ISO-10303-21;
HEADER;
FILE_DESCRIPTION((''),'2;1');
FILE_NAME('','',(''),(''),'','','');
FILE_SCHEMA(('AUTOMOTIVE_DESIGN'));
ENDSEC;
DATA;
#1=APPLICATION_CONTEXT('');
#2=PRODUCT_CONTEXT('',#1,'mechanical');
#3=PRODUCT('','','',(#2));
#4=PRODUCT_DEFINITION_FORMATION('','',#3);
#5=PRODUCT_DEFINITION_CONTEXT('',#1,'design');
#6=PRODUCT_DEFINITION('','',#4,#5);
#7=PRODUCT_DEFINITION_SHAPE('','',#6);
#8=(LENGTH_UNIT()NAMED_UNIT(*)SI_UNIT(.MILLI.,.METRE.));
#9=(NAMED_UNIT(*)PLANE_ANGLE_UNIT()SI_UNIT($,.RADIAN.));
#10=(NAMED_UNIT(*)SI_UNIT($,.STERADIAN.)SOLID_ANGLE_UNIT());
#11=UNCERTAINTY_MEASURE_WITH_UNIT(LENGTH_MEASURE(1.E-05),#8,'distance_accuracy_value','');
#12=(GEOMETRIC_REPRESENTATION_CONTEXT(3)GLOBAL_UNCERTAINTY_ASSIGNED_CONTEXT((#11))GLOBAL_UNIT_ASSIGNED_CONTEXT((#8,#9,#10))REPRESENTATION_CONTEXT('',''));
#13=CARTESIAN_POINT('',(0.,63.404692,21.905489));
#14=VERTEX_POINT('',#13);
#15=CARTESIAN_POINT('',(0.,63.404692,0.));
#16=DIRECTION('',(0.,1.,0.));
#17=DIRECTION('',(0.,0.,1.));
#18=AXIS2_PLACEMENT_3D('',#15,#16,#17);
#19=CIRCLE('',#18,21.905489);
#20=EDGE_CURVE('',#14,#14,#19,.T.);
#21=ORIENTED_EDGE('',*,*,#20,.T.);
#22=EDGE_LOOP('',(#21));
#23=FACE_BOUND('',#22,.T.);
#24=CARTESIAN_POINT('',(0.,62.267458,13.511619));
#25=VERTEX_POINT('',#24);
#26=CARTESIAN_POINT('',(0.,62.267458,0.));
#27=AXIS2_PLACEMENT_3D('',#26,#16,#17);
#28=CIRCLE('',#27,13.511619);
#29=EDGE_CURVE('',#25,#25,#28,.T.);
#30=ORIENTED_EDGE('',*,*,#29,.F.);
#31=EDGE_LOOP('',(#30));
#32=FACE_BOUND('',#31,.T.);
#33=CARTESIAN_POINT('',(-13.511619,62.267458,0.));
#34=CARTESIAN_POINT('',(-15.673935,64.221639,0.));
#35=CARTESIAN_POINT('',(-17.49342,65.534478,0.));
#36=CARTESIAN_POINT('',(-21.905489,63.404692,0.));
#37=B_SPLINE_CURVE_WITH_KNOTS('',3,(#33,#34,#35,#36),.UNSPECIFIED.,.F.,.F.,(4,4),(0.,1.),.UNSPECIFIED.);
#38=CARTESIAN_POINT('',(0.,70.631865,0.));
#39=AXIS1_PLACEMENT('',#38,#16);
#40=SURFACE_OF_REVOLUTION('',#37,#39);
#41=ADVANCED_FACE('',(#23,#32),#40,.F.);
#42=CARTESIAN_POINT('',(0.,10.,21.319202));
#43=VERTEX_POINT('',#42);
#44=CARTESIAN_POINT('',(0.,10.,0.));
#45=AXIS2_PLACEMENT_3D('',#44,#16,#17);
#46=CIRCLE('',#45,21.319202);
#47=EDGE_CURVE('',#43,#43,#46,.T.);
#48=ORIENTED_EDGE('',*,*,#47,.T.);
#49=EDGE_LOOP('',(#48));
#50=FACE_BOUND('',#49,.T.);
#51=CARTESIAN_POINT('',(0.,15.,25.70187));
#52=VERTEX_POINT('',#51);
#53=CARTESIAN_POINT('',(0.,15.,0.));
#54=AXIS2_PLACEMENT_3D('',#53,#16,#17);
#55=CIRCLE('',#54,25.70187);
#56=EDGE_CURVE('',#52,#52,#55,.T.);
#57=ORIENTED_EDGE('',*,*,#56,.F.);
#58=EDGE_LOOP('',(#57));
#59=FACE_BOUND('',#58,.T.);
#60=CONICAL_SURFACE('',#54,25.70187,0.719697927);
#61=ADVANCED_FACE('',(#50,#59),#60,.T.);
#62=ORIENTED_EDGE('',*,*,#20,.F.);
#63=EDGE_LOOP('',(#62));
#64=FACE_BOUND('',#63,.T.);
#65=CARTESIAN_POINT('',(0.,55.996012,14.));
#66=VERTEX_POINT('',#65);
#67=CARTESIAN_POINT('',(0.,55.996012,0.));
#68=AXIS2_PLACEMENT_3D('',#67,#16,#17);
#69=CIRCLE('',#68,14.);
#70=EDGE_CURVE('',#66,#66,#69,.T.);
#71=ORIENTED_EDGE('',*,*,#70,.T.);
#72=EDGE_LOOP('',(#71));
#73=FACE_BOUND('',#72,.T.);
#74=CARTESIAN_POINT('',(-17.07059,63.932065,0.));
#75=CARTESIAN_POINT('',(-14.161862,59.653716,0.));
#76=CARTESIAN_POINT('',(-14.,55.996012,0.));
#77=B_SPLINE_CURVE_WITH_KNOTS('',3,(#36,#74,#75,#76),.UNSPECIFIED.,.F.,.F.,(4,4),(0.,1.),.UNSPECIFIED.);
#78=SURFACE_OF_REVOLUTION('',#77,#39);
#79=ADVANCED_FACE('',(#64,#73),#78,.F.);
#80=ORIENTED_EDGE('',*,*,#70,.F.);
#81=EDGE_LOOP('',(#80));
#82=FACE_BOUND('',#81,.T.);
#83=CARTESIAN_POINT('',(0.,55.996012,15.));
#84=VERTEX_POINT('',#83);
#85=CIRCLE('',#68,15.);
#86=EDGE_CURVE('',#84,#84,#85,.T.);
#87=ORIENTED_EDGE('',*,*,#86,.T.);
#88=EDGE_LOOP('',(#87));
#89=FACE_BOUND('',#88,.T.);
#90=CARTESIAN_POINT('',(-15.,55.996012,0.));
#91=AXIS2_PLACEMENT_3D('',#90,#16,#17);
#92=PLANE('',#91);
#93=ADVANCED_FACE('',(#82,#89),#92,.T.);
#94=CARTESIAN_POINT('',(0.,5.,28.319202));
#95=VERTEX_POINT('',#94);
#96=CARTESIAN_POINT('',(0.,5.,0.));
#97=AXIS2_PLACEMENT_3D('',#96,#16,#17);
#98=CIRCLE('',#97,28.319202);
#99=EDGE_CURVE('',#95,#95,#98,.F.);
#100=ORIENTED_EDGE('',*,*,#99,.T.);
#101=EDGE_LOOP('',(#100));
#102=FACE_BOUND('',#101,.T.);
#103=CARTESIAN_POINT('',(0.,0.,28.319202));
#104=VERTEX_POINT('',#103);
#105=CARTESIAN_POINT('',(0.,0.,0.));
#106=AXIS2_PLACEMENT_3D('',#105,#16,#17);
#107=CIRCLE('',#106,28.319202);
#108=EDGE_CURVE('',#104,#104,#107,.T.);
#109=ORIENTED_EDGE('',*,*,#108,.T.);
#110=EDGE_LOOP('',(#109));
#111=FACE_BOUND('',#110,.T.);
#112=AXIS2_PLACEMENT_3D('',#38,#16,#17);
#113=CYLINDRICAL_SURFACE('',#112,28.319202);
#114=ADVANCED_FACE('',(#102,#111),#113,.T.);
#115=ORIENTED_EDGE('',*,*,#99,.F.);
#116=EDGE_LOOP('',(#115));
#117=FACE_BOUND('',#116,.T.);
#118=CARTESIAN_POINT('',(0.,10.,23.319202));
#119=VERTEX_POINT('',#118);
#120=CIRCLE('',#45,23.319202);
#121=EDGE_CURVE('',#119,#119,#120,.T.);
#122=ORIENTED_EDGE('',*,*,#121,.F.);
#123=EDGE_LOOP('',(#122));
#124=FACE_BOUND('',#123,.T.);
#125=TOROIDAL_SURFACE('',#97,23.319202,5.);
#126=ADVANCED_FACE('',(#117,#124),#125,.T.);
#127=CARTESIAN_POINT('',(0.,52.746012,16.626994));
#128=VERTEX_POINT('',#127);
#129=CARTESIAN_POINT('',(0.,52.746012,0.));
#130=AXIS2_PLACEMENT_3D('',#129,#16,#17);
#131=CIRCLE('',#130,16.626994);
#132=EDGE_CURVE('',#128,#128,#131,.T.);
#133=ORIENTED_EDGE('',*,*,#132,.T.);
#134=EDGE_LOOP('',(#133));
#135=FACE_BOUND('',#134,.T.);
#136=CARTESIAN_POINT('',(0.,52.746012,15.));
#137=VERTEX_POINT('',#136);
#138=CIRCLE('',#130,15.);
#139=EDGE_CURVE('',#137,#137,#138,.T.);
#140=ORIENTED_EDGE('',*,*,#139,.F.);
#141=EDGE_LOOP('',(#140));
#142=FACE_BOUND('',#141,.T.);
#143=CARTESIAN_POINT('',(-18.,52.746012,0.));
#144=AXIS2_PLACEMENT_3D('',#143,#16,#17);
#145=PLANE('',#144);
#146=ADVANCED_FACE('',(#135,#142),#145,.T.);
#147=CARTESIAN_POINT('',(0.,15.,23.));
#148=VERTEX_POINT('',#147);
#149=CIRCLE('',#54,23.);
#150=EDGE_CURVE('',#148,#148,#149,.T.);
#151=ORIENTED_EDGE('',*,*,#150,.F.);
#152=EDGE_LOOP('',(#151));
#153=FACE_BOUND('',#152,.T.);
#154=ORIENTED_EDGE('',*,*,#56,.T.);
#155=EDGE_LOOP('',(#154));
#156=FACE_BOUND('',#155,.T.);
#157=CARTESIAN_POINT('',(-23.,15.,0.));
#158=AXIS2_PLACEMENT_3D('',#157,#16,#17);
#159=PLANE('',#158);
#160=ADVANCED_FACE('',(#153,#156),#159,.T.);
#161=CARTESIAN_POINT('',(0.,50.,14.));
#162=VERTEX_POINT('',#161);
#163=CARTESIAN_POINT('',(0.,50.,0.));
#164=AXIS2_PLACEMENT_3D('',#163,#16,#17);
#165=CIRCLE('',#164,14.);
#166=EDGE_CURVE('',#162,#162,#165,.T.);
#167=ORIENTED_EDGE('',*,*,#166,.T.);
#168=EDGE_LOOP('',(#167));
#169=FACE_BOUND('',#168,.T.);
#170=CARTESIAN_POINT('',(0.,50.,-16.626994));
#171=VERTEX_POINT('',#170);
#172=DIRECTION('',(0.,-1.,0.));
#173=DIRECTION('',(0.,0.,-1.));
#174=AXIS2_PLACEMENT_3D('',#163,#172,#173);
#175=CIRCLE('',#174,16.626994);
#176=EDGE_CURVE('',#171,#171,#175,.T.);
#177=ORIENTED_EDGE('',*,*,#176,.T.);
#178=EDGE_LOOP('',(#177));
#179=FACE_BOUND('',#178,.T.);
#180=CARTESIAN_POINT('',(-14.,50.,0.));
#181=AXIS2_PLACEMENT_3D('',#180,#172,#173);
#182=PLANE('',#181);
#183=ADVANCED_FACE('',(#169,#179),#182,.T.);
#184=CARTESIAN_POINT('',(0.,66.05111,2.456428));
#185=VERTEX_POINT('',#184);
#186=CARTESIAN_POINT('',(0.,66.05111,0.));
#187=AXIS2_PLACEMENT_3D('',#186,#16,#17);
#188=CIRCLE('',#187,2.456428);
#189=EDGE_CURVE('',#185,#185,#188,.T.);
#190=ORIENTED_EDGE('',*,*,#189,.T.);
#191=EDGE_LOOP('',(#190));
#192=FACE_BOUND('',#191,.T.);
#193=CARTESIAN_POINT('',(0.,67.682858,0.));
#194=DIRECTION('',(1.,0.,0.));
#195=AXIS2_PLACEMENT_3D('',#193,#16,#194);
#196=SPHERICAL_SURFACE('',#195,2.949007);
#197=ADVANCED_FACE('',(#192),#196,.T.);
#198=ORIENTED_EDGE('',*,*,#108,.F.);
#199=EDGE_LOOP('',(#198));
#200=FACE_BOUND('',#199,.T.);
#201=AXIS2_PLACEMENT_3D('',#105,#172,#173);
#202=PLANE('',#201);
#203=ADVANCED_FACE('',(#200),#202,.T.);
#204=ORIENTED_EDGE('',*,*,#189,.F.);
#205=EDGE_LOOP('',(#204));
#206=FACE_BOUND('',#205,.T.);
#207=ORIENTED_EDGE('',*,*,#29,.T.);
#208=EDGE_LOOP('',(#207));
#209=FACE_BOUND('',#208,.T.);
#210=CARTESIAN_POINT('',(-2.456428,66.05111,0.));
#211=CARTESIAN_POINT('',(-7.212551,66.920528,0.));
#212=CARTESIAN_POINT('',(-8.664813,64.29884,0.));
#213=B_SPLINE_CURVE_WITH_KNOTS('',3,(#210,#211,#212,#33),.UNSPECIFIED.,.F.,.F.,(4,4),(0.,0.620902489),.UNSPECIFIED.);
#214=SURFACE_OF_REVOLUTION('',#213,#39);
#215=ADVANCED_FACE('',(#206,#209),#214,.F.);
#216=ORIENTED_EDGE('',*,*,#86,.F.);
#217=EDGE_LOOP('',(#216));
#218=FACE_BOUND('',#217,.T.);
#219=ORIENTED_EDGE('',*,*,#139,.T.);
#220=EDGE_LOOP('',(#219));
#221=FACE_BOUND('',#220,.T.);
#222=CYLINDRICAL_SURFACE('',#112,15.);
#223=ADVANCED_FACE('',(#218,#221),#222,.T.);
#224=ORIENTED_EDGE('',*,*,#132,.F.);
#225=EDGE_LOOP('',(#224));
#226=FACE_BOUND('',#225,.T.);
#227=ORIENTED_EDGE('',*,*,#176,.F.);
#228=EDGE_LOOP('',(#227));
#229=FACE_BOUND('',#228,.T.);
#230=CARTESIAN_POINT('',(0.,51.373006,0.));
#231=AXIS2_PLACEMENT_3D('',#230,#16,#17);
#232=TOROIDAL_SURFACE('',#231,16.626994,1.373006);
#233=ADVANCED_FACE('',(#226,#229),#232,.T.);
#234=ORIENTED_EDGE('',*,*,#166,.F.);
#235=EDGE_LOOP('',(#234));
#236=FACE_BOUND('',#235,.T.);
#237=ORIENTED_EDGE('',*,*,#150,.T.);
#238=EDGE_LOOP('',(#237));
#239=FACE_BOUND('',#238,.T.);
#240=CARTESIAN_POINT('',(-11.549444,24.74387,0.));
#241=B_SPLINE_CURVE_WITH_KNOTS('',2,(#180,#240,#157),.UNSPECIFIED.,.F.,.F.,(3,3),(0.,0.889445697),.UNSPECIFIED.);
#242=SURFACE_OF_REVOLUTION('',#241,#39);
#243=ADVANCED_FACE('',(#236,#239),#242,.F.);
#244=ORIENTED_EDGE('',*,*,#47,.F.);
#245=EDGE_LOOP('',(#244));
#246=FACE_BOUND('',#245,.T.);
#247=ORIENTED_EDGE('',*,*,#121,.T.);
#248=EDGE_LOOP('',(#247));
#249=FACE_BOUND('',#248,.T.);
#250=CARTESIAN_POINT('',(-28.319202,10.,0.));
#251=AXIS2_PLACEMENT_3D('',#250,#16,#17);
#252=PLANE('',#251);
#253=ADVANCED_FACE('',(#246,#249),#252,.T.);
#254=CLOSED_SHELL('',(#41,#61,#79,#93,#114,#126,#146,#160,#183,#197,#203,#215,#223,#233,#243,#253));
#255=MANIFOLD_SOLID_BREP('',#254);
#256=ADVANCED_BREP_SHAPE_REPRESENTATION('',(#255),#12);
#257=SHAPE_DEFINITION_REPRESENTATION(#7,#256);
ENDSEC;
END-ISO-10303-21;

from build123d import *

# Parameters (mm, degrees)
FILLET_1_R = 1.373006
FILLET_7_R = 5


with BuildPart() as part:
    # Эскиз1 → Повернуть11 (revolve)
    with BuildSketch(Plane.XY, mode=Mode.PRIVATE) as revolve_11_sk:
        with BuildLine():
            Line((-28.319201636, 10), (-21.319202, 10))
            Line((-21.319202, 10), (-25.70187, 15))
            Line((-25.70187, 15), (-23, 15))
            add(Edge.make_bspline(
                [(-14, 50), (-11.549443609, 24.743870175), (-23, 15)],
                knots=[0, 0, 0, 0.889445697, 0.889445697, 0.889445697], degree=2))
            Line((-14, 50), (-18, 50))
            Line((-18, 50), (-18, 52.746011712))
            Line((-18, 52.746011712), (-15, 52.746011712))
            Line((-15, 52.746011712), (-15, 55.996011712))
            Line((-15, 55.996011712), (-14, 55.996011712))
            add(Edge.make_bspline(
                [(-14, 55.996011712), (-14.161861727, 59.65371566), (-17.070590258, 63.93206534), (-21.905488907, 63.404692418)],
                knots=[0, 0, 0, 0, 1, 1, 1, 1], degree=3))
            add(Edge.make_bspline(
                [(-21.905488907, 63.404692418), (-17.493420158, 65.534477533), (-15.673935308, 64.221639363), (-13.511618863, 62.267458412)],
                knots=[0, 0, 0, 0, 1, 1, 1, 1], degree=3))
            add(Edge.make_bspline(
                [(-13.511618863, 62.267458412), (-8.664813479, 64.29884008), (-7.212551469, 66.920528446), (-2.456427554, 66.051109587)],
                knots=[0, 0, 0, 0, 0.620902489, 0.620902489, 0.620902489, 0.620902489], degree=3))
            ThreePointArc((-2.456427554, 66.051109587), (-2.598911214, 69.07652309), (0, 70.631865164))
            Line((0, 70.631865164), (0, 0))
            Line((0, 0), (-28.319201636, 0))
            Line((-28.319201636, 0), (-28.319201636, 10))
        make_face()
    revolve(revolve_11_sk.sketch.rotate(Axis((0, 70.631865164, 0), (0, -1, 0)), 270), axis=Axis((0, 70.631865164, 0), (0, -1, 0)))

    # Скругление1
    fillet_1_edges = [part.edges().sort_by_distance(p)[0] for p in [
        (0, 50, -18),
        (0, 52.746011712, -18),
    ]]
    fillet(fillet_1_edges, radius=FILLET_1_R - 0.0001)  # a hair under: the kernel refuses the full size

    # Скругление7
    fillet_7_edges = [part.edges().sort_by_distance(p)[0] for p in [
        (0, 10, -28.319201636),
    ]]
    fillet(fillet_7_edges, radius=FILLET_7_R)


solid = part.part
